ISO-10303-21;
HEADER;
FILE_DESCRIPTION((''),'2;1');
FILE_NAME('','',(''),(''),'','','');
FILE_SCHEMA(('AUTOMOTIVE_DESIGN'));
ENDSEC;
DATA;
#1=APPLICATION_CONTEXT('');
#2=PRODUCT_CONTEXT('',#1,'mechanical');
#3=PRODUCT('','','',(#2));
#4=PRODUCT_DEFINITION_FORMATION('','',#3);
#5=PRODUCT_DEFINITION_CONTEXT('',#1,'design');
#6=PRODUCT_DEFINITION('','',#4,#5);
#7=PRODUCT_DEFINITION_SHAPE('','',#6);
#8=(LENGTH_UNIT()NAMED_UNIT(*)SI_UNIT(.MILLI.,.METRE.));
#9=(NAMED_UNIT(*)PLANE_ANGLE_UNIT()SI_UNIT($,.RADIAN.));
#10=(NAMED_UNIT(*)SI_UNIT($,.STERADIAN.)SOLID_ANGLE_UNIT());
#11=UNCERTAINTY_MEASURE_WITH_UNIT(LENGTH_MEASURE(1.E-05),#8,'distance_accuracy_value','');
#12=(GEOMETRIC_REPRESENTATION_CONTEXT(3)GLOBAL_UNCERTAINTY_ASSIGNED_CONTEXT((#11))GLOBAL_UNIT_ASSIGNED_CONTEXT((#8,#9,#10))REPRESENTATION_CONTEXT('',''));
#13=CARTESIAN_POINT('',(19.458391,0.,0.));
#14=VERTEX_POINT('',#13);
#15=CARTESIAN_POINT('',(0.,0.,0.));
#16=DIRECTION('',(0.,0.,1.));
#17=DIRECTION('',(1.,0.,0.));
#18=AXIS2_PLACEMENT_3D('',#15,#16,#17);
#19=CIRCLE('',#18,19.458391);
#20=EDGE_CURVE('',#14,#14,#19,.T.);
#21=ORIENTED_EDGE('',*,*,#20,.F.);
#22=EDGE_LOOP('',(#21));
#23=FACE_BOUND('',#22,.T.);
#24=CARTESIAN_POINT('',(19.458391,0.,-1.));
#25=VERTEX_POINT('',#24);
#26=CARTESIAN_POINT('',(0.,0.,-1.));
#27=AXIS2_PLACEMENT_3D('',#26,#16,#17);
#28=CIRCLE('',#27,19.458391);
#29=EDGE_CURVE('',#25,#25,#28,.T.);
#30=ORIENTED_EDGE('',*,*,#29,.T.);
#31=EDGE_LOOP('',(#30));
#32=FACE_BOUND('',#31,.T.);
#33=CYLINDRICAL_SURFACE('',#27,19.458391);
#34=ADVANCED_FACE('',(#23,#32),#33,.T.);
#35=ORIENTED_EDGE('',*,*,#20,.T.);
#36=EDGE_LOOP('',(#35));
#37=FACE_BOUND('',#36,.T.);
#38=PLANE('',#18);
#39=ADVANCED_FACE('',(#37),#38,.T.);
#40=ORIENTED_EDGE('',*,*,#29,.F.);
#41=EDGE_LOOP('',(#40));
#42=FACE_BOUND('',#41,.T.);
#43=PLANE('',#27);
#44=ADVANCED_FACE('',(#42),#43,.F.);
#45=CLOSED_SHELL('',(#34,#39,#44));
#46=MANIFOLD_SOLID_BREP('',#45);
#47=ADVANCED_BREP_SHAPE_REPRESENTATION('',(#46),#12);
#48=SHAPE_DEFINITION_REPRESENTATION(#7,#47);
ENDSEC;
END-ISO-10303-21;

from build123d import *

# Parameters (mm, degrees)
SKETCH1_R          = 19.458391291
BASE_FLANGE1_DEPTH = 1


# Sheet-metal steps are written as plain solids
with BuildPart() as part:
    # Sketch1 → Base-Flange1 (new body)
    with BuildSketch(Plane.XY):
        Circle(SKETCH1_R)
    extrude(amount=-BASE_FLANGE1_DEPTH)


solid = part.part
